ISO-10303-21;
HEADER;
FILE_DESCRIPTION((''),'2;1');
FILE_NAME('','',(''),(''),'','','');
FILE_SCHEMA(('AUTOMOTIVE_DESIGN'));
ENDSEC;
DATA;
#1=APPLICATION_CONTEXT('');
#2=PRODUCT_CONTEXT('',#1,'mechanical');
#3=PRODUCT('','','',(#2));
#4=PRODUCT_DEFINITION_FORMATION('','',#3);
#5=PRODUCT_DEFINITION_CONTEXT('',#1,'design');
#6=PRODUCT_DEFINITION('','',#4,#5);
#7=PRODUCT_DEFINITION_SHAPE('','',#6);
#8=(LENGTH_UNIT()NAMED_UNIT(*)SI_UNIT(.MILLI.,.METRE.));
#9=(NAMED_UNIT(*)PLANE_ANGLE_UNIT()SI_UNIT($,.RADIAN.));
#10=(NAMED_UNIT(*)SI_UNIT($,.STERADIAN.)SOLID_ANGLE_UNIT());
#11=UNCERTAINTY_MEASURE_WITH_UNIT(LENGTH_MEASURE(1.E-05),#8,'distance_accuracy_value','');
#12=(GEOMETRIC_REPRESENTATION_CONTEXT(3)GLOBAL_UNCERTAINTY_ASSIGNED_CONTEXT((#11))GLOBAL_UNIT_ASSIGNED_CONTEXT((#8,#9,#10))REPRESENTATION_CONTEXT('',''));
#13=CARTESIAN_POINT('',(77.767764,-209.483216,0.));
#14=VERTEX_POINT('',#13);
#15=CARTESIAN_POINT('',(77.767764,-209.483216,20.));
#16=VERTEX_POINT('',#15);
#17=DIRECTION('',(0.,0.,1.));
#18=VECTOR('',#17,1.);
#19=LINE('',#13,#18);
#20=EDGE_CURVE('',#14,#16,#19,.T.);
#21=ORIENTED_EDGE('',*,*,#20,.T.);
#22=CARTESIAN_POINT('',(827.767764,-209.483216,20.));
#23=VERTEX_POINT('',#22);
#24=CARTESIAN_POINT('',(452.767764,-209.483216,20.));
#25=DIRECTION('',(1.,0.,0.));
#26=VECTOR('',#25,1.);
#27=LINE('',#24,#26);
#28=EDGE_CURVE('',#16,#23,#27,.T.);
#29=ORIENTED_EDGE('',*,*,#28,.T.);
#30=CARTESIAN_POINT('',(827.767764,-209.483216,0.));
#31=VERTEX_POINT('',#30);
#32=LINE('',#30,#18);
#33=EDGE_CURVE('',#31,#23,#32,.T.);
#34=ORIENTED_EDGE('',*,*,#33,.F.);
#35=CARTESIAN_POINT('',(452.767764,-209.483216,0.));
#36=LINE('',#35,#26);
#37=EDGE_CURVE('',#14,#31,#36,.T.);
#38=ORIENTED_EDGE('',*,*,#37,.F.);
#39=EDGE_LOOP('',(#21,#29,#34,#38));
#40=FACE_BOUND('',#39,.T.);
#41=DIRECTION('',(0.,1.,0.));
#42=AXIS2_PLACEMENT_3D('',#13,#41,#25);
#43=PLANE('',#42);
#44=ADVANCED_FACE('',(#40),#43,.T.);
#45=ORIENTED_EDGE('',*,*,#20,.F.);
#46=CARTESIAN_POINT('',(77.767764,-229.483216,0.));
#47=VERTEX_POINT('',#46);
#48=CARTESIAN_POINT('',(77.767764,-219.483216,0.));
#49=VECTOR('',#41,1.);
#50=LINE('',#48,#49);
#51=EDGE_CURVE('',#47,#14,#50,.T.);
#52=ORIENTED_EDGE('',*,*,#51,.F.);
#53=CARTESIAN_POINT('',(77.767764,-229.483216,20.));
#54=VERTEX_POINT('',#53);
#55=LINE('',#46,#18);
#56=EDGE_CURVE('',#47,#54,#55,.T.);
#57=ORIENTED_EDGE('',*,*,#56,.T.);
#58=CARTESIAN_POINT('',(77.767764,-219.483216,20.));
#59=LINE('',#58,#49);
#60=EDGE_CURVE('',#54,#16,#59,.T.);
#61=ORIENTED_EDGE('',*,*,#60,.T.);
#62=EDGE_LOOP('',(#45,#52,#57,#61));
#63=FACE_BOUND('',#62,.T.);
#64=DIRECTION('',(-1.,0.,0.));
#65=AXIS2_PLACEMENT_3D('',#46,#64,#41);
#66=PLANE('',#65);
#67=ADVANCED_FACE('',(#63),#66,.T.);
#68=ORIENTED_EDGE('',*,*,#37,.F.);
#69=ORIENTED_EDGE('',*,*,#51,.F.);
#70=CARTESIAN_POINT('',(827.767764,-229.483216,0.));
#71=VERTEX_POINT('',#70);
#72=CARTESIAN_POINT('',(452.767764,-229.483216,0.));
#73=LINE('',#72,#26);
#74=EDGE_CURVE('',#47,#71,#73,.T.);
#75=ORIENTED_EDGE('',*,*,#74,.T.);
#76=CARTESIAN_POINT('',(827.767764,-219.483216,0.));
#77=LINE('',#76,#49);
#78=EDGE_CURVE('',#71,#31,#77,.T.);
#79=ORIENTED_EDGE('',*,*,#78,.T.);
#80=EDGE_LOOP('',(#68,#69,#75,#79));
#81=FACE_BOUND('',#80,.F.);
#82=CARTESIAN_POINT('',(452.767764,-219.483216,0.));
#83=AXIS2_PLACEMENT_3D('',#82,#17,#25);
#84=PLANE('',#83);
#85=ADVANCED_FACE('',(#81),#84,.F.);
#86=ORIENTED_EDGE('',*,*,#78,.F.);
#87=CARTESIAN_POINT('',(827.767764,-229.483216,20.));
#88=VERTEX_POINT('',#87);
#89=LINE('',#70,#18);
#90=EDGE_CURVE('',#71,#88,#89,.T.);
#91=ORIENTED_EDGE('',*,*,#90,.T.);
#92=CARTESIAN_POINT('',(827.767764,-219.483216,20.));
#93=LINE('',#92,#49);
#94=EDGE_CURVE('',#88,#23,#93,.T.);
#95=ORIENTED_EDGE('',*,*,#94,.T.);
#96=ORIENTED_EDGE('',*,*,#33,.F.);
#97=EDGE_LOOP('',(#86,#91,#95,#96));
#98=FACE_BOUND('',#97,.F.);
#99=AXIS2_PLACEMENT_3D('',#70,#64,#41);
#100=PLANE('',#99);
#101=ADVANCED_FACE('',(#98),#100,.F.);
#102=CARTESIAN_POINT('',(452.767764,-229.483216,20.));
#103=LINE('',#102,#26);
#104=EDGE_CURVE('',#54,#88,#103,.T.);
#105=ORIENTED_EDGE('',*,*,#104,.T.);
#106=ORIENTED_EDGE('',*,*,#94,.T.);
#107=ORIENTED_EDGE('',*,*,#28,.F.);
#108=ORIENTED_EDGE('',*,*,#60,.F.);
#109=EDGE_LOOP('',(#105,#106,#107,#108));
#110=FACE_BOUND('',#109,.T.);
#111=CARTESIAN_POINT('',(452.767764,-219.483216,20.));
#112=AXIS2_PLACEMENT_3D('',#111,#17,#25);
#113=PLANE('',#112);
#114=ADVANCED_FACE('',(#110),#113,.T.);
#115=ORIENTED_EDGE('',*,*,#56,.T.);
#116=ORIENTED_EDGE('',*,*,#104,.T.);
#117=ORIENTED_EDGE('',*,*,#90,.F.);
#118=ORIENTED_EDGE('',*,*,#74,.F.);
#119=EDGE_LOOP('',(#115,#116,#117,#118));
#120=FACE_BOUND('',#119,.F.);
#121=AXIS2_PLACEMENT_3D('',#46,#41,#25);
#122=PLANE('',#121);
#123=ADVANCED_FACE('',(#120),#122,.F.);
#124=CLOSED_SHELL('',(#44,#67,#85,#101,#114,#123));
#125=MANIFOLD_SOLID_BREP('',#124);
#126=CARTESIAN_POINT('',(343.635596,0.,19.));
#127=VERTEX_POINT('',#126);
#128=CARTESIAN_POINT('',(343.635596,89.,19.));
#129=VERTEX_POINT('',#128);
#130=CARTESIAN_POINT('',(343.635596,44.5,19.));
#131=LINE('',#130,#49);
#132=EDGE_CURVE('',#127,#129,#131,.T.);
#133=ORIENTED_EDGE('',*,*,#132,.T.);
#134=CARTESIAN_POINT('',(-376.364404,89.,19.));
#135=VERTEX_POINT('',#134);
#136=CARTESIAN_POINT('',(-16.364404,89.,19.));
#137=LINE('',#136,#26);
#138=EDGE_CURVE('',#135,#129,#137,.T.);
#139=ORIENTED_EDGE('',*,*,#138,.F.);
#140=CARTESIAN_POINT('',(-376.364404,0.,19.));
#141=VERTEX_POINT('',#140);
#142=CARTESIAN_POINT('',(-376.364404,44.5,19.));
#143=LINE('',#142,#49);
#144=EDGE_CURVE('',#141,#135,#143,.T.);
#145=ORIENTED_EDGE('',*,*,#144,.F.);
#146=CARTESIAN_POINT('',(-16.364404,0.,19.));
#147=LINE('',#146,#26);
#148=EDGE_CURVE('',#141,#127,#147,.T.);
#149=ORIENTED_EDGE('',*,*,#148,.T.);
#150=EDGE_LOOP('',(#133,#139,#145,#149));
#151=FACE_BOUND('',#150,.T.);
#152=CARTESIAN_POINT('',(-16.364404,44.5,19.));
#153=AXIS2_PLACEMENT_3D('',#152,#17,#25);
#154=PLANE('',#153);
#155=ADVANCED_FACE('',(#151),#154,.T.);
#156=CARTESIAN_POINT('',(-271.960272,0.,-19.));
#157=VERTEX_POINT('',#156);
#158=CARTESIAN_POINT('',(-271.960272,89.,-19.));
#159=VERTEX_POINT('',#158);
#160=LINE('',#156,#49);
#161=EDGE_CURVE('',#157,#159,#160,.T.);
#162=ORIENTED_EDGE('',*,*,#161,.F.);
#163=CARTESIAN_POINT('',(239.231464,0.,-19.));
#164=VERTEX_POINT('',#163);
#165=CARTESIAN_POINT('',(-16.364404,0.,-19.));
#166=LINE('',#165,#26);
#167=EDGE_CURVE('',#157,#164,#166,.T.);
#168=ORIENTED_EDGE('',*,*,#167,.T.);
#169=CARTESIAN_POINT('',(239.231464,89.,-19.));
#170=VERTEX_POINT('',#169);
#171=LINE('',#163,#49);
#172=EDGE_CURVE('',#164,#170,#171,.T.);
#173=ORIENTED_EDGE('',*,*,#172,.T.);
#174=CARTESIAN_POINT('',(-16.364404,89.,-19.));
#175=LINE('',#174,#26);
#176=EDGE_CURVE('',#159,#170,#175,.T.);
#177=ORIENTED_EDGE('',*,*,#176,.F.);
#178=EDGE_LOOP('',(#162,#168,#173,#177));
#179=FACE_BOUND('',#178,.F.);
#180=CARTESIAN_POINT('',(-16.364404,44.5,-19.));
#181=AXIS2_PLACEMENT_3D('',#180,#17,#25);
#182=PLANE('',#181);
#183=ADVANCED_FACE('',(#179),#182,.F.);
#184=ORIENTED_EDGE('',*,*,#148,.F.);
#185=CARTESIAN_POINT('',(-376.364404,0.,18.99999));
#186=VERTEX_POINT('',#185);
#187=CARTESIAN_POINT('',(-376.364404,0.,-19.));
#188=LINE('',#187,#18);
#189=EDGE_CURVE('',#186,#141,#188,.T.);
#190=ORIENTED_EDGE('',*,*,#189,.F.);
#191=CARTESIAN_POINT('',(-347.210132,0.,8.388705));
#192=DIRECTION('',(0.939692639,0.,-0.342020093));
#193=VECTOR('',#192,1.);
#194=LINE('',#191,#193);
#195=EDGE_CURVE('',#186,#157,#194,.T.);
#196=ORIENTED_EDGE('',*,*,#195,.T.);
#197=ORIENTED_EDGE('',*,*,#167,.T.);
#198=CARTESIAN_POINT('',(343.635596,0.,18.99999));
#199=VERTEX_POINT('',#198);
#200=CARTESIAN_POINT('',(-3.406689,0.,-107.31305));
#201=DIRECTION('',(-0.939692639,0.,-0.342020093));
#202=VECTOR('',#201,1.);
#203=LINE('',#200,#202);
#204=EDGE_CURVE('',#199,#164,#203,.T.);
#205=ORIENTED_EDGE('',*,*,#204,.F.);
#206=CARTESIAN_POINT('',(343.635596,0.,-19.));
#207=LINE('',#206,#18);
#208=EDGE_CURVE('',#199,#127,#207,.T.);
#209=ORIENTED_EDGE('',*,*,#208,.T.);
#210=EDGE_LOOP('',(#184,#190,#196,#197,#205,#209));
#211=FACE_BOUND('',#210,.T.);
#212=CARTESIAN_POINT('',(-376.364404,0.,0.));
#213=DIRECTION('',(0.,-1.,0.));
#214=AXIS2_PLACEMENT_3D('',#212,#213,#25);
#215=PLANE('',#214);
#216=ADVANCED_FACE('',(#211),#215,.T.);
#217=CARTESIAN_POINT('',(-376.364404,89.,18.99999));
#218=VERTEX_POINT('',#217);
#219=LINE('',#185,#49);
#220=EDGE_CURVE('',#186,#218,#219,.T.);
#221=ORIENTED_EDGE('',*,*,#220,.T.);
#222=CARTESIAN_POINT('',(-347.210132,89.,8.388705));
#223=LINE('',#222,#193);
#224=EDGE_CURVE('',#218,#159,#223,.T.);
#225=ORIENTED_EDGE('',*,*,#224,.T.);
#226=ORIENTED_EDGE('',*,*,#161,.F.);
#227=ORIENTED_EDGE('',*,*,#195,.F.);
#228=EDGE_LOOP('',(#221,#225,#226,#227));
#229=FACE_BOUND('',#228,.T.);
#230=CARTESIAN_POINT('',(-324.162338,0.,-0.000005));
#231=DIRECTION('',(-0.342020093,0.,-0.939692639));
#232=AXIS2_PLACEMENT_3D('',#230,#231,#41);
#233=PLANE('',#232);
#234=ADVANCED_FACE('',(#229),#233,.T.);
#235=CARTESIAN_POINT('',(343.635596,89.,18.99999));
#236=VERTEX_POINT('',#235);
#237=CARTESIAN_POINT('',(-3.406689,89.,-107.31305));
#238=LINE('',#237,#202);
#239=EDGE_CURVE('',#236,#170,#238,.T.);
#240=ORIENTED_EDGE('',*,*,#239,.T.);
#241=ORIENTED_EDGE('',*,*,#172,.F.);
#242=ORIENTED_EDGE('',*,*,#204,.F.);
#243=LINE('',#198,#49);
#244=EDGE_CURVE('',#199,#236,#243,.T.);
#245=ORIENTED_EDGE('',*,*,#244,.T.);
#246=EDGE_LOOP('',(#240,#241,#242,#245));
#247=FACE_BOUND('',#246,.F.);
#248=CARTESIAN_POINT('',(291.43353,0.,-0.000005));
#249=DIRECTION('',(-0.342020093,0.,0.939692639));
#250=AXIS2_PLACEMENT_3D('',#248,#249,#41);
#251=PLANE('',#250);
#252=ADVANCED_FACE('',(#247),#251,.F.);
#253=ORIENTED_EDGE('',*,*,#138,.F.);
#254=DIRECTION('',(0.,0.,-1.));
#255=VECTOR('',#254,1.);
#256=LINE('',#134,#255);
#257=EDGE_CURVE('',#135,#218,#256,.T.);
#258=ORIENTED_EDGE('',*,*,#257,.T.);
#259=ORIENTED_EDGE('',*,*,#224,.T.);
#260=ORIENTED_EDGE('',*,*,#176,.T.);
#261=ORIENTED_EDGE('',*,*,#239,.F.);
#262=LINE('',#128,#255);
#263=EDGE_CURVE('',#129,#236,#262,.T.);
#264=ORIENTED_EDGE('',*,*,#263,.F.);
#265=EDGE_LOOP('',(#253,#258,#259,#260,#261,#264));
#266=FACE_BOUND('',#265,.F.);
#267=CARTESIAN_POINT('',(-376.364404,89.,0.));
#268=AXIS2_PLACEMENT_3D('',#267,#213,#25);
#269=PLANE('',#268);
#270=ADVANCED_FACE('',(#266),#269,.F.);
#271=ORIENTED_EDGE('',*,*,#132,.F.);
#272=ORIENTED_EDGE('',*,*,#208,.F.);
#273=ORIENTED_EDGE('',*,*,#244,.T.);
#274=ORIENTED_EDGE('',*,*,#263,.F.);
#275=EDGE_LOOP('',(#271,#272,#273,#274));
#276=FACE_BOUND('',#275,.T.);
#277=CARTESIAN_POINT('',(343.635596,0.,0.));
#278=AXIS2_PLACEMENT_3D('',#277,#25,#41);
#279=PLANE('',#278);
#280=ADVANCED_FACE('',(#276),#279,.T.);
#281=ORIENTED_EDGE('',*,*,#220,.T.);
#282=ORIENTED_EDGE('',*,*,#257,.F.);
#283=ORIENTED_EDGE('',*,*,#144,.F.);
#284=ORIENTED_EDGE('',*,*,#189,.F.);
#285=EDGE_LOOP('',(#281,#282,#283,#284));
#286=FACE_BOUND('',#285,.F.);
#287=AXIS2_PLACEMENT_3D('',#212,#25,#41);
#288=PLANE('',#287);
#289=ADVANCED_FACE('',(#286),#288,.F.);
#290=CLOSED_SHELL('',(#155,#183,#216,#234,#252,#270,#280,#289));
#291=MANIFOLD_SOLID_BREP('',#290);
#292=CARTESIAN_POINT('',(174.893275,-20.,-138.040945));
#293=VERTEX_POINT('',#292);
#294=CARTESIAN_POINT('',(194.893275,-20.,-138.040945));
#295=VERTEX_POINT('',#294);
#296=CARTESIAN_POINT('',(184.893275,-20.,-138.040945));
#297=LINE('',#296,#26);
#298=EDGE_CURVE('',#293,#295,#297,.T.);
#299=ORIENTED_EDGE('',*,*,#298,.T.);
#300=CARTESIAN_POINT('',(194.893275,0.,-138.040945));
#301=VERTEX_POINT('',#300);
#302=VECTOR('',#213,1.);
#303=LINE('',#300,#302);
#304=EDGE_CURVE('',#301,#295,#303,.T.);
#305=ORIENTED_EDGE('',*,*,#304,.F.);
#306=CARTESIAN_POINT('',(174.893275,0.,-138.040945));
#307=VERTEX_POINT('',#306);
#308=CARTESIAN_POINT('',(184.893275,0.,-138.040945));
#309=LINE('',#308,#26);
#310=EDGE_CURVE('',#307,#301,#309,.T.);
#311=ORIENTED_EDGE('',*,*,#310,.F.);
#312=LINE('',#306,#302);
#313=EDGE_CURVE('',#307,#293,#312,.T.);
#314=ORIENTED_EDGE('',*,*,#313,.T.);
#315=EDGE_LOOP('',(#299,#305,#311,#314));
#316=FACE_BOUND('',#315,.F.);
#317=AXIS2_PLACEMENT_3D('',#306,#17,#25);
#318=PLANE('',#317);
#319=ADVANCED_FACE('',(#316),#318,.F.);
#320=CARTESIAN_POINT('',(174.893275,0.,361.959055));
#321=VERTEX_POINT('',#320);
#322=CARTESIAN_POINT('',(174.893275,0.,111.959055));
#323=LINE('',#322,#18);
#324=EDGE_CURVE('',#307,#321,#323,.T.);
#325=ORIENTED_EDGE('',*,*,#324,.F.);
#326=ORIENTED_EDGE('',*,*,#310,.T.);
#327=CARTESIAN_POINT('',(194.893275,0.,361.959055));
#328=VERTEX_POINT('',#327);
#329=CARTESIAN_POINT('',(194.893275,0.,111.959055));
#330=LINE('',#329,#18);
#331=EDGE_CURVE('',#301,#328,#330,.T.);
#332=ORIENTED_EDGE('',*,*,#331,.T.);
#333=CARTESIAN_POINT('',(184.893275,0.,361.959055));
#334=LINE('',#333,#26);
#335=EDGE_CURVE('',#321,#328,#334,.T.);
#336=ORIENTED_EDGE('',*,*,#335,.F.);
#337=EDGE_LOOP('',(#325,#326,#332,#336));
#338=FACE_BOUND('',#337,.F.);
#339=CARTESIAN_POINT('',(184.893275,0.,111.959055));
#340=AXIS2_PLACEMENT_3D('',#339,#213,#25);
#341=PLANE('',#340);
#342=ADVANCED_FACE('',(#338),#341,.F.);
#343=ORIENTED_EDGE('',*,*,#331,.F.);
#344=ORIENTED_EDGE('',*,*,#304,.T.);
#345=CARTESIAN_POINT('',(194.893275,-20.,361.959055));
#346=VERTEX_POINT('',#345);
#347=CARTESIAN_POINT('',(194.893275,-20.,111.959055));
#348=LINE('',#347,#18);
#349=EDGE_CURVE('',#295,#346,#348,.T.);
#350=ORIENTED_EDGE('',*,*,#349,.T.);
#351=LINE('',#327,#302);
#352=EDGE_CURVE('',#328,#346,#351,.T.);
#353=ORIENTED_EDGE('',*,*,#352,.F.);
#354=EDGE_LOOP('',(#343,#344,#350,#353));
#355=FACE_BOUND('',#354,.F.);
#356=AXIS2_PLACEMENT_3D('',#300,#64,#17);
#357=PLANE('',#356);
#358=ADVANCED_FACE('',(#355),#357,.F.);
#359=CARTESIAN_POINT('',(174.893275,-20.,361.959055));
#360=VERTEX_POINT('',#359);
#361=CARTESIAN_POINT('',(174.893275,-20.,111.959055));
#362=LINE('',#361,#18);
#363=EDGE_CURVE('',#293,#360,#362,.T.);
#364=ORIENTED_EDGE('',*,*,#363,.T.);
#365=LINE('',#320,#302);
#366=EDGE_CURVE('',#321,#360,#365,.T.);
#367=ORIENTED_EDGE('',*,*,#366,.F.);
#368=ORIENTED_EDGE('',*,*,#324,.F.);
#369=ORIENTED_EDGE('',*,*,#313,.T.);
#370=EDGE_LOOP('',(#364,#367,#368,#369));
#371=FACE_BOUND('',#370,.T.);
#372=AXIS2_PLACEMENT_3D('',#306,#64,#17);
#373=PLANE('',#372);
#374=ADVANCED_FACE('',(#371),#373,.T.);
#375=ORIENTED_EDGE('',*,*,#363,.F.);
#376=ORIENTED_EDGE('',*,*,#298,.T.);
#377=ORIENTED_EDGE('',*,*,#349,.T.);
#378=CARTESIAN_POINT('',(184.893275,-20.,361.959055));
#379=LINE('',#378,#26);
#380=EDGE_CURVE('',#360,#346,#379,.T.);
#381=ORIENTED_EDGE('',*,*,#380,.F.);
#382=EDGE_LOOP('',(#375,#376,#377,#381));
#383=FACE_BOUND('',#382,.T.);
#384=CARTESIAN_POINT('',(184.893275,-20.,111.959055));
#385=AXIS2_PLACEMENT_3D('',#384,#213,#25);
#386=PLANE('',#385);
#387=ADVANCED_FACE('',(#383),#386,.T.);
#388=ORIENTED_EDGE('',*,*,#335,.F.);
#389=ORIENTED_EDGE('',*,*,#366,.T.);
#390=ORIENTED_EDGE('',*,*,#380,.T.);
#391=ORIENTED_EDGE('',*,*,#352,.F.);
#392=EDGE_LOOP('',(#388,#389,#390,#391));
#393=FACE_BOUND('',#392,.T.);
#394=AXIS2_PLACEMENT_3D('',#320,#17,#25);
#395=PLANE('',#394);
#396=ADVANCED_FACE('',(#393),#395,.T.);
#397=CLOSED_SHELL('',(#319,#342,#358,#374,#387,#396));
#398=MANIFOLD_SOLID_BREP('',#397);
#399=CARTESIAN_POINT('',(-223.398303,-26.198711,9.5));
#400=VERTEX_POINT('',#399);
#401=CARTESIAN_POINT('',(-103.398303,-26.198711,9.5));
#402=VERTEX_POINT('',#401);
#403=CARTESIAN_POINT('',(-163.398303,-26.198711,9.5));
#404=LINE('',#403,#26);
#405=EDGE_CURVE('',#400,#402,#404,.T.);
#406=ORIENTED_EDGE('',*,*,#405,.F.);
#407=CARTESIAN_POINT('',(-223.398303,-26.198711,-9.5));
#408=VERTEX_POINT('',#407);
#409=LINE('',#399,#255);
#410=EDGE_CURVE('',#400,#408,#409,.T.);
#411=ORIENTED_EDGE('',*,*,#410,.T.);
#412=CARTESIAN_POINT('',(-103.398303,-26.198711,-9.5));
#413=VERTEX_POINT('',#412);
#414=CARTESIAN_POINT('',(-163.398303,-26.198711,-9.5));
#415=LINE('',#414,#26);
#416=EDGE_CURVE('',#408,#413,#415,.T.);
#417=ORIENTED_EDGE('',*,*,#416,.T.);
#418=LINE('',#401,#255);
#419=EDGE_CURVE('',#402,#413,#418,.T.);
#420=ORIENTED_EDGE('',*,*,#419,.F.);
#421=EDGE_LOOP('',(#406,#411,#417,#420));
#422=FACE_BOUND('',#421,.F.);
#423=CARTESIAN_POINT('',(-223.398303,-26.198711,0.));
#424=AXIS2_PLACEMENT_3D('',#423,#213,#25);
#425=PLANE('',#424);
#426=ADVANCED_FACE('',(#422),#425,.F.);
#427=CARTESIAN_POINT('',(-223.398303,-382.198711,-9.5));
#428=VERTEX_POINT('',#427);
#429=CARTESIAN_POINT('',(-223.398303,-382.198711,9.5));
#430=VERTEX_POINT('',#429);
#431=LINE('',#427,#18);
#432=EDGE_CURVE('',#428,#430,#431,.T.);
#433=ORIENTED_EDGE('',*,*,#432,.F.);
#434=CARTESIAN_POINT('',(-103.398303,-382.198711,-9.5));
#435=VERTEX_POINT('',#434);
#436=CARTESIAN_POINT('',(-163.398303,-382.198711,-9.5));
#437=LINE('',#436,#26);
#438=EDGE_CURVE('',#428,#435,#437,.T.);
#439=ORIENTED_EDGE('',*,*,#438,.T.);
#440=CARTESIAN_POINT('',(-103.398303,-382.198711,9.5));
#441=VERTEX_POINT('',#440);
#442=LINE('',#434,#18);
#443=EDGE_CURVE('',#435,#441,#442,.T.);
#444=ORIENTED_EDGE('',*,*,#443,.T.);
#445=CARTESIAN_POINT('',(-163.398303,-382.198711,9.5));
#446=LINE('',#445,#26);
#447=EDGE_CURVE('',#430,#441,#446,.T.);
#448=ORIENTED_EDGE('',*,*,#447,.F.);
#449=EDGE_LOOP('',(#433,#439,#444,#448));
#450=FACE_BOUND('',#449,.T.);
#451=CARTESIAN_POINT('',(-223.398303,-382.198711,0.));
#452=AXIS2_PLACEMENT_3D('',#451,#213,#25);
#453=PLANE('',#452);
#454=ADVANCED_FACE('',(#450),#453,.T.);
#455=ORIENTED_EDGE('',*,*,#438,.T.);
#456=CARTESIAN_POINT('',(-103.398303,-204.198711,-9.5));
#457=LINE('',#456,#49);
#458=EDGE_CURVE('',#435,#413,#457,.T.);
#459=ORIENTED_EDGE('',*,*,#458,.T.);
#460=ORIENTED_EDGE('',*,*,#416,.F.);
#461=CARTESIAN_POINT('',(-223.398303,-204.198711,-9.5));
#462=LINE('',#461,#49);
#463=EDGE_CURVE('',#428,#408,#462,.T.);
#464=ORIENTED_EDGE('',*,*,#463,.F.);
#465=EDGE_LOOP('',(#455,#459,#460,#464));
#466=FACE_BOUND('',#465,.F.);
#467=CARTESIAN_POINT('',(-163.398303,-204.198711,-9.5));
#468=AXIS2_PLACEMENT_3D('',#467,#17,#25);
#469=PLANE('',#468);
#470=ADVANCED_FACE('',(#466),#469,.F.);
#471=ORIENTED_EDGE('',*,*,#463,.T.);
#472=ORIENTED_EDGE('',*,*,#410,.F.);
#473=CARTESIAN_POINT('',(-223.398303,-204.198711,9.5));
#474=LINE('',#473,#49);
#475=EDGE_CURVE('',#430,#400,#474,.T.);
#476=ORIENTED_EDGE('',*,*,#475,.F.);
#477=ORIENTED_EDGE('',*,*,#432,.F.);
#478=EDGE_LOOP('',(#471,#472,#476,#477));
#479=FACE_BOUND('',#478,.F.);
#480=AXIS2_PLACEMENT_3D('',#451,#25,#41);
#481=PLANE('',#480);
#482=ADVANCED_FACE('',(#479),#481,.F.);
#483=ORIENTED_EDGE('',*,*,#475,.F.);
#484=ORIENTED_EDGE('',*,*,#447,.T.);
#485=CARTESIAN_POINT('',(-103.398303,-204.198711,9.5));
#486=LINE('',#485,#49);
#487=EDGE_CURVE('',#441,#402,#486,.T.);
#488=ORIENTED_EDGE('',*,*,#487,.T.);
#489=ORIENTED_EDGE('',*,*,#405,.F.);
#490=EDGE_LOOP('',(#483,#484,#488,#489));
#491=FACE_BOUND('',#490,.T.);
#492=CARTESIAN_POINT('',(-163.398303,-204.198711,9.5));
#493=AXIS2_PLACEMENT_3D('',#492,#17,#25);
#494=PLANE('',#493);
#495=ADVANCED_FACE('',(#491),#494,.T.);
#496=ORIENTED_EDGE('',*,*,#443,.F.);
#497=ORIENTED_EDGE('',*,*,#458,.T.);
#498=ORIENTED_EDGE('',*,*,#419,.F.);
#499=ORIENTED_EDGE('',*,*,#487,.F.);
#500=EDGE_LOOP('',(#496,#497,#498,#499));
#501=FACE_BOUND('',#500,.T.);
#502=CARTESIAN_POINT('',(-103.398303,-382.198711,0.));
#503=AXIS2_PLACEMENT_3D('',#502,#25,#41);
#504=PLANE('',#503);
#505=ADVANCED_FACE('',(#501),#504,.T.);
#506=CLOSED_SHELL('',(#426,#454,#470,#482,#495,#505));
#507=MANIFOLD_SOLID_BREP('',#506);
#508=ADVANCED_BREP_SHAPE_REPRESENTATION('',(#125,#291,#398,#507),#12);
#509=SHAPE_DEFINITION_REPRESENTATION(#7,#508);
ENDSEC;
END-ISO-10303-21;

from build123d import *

# Parameters (mm, degrees)
F0_W       = 720
F0_H       = 89
F1_DEPTH   = 19
F2_W       = 120
F2_H       = 356
F3_DEPTH   = 9.5
F4_SIZE2   = 104.404132
F4_SIZE    = 37.99999
F4_2_SIZE2 = 104.404132
F4_2_SIZE  = 37.99999
F5_W       = 20
F5_H       = 500
F6_DEPTH   = 20
F7_W       = 750
F7_H       = 20
F8_DEPTH   = 20


# Not quite as in the source:
# - a fillet or chamfer is up to 0.001 mm smaller than in the source, because OpenCascade refuses the exact size


with BuildPart() as f1:
    # F0 (on Top) → F1 (new body, symmetric)
    with BuildSketch(Plane.XY):
        with Locations((-16.3644044673, 44.5)):
            Rectangle(F0_W, F0_H)
    extrude(amount=F1_DEPTH, both=True)

    # F4 (size 38 and 104.4041419393 in the source; OpenCascade refuses exactly that, so slightly less here)
    f4_edges = [f1.edges().sort_by_distance(p)[0] for p in [
        (-376.364404, 44.5, -19),
    ]]
    f4_side = f1.faces().sort_by_distance((-376.364404, 44.5, 0))[0]
    chamfer(f4_edges, length=F4_SIZE, length2=F4_SIZE2, reference=f4_side)

    # F4#2 (size 38 and 104.4041419393 in the source; OpenCascade refuses exactly that, so slightly less here)
    f4_2_edges = [f1.edges().sort_by_distance(p)[0] for p in [
        (343.635596, 44.5, -19),
    ]]
    f4_2_side = f1.faces().sort_by_distance((343.635596, 44.5, 0))[0]
    chamfer(f4_2_edges, length=F4_2_SIZE, length2=F4_2_SIZE2, reference=f4_2_side)


with BuildPart() as f3:
    # F2 (on Top) → F3 (new body, symmetric)
    with BuildSketch(Plane.XY):
        with Locations((-163.3983030915, -204.1987112857)):
            Rectangle(F2_W, F2_H)
    extrude(amount=F3_DEPTH, both=True)


with BuildPart() as f6:
    # F5 (on Front) → F6 (new body)
    with BuildSketch(Plane.XZ):
        with Locations((184.8932749033, 111.9590550661)):
            Rectangle(F5_W, F5_H)
    extrude(amount=F6_DEPTH)


with BuildPart() as f8:
    # F7 (on Top) → F8 (new body)
    with BuildSketch(Plane.XY):
        with Locations((452.7677640198, -219.4832157493)):
            Rectangle(F7_W, F7_H)
    extrude(amount=F8_DEPTH)


solid = Compound([f1.part, f3.part, f6.part, f8.part])
